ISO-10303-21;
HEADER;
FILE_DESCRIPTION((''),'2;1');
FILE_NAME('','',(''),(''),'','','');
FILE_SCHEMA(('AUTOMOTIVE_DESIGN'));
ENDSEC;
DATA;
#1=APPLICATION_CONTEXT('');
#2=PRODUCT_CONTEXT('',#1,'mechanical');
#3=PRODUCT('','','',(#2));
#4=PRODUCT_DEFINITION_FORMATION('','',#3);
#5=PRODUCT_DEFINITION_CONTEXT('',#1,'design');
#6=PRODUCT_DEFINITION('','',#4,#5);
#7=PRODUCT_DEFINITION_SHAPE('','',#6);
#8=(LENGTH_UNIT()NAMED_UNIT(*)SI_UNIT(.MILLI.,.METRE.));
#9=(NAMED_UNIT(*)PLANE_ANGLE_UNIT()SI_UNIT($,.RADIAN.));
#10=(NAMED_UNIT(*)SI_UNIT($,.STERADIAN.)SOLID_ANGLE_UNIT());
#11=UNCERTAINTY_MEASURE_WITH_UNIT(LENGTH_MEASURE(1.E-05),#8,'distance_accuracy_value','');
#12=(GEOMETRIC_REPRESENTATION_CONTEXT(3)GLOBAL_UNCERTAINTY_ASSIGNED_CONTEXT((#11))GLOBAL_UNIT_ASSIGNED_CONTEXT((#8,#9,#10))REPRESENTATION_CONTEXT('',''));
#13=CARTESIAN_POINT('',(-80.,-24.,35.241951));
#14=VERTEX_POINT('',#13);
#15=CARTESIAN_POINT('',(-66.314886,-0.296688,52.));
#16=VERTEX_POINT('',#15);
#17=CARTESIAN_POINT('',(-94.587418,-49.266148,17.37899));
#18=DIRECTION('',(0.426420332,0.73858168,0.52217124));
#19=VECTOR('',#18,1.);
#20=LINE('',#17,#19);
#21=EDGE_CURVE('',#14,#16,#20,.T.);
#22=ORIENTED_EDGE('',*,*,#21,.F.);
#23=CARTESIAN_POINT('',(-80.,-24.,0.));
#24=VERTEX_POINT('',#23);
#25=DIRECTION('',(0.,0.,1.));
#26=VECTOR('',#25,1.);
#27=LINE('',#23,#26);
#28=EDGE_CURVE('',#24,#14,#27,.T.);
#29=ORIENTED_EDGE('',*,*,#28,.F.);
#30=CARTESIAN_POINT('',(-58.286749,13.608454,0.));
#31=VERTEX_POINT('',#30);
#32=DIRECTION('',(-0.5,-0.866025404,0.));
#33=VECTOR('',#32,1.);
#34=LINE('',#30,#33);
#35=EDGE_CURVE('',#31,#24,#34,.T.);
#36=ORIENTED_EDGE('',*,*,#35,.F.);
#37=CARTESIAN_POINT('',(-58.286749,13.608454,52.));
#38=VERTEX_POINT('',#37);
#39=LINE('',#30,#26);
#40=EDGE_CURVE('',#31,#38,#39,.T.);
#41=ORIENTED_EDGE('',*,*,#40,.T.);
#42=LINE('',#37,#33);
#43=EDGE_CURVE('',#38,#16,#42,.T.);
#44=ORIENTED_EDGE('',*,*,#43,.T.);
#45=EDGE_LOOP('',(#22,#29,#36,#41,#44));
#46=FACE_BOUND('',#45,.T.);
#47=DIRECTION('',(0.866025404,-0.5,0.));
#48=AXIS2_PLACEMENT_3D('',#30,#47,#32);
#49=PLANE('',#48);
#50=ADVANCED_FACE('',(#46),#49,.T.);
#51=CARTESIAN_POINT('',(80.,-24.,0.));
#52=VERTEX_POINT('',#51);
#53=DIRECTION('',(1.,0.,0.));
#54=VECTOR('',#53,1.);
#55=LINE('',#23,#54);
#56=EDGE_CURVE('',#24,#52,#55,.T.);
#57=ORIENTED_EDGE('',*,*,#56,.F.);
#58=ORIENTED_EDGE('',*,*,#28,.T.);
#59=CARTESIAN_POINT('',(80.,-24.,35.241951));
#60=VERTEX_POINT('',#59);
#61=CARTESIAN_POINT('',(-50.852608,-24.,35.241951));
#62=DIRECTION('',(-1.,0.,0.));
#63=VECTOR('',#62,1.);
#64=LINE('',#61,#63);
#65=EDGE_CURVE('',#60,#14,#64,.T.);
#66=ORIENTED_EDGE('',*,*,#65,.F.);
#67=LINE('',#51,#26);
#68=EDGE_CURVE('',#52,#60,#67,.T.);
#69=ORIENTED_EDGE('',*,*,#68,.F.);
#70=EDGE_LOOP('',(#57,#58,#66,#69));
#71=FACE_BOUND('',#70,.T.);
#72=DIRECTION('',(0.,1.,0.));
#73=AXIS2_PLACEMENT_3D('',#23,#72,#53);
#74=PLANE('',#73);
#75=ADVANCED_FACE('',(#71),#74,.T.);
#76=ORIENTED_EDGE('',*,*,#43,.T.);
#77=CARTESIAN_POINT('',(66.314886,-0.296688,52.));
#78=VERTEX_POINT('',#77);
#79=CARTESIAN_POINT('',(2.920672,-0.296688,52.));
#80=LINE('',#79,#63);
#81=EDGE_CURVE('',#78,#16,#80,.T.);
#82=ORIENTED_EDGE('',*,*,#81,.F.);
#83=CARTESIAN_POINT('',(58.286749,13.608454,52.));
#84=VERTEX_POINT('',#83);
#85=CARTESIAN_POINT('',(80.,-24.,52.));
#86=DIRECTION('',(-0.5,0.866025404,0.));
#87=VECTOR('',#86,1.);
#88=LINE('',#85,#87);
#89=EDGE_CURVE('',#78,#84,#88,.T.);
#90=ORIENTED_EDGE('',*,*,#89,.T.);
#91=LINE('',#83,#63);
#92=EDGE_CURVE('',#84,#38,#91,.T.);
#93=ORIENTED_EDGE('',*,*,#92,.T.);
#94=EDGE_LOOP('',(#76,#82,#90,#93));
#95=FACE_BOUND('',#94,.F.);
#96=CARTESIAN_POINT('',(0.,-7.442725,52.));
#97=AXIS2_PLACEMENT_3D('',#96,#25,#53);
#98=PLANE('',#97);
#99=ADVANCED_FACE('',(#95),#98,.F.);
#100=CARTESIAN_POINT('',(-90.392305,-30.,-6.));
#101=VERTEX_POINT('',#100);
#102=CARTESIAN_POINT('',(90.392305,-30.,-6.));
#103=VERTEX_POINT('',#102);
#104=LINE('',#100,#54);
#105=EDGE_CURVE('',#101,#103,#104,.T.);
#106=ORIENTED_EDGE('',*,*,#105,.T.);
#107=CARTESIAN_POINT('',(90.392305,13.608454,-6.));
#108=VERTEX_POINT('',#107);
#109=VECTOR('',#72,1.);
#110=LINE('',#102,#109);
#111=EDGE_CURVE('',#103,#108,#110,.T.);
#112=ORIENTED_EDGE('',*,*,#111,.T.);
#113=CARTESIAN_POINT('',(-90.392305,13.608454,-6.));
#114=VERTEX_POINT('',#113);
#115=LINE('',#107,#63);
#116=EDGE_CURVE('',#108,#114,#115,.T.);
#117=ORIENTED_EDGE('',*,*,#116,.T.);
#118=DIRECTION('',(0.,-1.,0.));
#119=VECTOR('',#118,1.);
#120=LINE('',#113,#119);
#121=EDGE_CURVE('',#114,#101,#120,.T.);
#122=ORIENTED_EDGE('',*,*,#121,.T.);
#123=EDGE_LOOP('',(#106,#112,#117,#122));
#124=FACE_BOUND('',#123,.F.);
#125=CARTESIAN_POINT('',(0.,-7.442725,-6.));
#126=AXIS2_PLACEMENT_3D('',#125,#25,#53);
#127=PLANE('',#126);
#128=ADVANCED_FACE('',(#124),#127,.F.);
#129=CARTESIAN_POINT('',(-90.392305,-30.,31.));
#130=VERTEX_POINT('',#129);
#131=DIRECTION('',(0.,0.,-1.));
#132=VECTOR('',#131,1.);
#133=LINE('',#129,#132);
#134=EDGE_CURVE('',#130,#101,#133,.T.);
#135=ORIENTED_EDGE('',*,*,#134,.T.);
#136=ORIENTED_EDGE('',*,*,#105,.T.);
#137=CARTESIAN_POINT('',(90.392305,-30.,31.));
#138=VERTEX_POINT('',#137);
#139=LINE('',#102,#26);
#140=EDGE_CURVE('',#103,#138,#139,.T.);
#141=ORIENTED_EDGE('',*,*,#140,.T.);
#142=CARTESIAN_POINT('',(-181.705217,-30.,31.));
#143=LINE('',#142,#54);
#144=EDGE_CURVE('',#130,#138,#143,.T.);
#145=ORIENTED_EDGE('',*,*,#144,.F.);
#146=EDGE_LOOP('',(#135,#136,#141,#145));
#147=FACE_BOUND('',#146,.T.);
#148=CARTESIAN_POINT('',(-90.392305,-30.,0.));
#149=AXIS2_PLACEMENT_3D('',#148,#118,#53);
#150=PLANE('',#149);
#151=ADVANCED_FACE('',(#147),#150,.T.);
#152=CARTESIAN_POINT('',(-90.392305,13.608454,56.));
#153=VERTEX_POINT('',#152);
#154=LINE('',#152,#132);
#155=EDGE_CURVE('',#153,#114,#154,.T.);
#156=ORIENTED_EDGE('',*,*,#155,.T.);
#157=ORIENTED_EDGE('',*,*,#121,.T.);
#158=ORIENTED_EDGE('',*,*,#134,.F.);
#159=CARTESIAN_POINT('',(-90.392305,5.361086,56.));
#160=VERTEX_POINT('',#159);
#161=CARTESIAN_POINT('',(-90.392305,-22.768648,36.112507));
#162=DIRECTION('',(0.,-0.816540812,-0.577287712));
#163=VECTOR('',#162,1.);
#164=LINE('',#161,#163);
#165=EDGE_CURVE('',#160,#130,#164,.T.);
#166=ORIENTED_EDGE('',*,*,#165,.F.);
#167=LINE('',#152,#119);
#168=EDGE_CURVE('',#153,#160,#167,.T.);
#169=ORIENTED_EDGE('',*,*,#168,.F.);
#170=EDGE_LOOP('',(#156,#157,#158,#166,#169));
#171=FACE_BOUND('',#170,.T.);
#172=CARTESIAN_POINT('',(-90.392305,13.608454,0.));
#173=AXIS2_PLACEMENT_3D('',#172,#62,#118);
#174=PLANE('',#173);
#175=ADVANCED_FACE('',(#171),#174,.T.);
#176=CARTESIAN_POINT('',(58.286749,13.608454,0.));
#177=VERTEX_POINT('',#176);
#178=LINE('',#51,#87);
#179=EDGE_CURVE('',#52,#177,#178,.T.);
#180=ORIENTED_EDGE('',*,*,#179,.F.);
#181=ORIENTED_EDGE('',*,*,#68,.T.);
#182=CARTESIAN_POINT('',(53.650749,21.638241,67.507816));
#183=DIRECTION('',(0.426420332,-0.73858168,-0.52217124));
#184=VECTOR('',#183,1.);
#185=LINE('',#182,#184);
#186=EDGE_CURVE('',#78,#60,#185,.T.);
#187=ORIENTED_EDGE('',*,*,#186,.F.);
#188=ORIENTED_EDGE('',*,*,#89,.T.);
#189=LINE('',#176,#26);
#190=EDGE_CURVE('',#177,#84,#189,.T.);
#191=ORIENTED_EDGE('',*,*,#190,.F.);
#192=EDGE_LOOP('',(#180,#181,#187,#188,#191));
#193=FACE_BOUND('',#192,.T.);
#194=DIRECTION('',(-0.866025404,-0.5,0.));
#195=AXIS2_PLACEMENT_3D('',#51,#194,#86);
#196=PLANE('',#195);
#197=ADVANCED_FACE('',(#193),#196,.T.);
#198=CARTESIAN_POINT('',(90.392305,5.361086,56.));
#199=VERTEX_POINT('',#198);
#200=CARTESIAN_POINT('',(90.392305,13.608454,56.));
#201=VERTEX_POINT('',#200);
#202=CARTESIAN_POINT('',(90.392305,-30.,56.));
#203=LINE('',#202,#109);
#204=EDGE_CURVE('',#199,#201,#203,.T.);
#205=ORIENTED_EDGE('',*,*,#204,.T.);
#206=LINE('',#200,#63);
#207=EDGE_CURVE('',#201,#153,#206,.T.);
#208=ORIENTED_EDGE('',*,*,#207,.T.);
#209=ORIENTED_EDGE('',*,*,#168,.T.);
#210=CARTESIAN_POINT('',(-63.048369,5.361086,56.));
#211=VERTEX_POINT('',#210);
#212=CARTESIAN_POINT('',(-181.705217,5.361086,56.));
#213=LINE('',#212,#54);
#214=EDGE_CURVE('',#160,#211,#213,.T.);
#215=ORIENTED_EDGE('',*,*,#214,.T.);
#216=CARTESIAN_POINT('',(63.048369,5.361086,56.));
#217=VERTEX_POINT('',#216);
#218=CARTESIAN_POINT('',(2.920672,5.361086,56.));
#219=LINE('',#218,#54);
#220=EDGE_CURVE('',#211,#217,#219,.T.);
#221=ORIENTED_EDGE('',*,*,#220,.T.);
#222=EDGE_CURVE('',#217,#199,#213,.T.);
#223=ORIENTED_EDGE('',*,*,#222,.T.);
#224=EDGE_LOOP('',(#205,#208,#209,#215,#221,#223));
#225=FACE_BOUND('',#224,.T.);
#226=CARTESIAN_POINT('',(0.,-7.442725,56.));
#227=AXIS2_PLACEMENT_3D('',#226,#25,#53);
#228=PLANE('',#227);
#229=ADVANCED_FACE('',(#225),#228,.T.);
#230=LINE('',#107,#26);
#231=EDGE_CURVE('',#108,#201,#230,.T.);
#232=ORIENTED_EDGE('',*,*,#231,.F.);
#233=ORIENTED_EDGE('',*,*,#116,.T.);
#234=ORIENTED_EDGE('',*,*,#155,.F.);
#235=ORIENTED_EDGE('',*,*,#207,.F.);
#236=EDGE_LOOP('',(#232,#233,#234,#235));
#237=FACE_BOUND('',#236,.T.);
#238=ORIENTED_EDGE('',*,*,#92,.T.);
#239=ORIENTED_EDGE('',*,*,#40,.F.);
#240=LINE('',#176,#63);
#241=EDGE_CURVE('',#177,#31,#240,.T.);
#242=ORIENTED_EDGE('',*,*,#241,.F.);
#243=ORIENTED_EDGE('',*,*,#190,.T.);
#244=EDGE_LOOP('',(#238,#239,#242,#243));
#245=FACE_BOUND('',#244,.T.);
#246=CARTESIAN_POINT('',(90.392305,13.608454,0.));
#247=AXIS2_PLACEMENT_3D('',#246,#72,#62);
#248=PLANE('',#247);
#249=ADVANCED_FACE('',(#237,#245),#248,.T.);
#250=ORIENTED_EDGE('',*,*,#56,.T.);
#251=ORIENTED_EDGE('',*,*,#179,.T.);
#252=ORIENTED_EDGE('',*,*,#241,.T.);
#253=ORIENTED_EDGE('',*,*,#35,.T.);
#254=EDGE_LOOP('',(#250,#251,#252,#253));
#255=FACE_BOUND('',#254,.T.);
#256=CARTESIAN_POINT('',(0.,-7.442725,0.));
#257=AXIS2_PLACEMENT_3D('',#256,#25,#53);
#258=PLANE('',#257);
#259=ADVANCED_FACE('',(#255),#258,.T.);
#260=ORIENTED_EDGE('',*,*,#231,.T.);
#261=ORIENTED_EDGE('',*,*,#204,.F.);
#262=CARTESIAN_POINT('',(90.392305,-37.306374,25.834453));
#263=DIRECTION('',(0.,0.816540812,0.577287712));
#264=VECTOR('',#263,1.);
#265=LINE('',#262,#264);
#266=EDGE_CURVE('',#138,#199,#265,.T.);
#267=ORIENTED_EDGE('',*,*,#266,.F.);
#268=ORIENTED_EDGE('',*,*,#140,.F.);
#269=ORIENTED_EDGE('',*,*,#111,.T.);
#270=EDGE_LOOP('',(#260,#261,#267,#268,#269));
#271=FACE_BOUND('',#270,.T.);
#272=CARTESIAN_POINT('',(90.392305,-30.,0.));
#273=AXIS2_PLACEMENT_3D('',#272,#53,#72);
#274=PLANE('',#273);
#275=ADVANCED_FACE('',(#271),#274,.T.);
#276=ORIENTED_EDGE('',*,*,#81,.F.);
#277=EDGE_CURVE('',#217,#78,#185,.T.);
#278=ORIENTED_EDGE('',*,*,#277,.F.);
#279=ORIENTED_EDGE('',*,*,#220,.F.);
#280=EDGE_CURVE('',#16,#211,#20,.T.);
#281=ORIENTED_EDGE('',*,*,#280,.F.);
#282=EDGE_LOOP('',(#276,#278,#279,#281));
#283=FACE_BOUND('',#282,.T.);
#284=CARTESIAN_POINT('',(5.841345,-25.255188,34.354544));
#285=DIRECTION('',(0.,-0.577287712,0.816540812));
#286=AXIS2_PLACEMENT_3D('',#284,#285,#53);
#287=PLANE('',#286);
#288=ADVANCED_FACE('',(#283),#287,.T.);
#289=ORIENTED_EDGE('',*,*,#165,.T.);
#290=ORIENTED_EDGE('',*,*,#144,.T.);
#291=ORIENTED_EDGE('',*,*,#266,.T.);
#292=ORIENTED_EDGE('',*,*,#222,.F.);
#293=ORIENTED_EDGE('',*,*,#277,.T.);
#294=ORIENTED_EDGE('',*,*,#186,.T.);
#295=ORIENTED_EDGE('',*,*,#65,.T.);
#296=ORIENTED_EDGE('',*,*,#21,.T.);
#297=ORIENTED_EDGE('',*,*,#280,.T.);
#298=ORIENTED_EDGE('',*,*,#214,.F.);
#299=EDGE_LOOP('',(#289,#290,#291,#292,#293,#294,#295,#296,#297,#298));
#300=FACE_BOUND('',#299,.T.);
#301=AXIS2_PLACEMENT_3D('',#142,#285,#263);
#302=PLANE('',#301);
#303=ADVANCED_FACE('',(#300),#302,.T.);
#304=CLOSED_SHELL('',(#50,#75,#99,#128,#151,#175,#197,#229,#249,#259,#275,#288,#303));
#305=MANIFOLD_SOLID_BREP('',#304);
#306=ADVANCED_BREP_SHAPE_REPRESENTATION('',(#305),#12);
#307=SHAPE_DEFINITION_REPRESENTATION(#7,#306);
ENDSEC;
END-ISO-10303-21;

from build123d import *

# Parameters (mm, degrees)
F1_DEPTH    = 56
F2_T1_DEPTH = 363.4104337306
F3_DEPTH    = 56
F6_DEPTH    = 6
F5_W        = 259.5228254795
F5_H        = 121.416632086
F7_DEPTH    = 25
F8_DEPTH    = 52


# Not quite as in the source:
# - a fillet or chamfer that OpenCascade refuses, or shapes differently, is made with other operations: its cross-section is extruded or revolved along the edge and cut away or added


with BuildPart() as f1:
    # F0 (on Top) → F1 (new body)
    with BuildSketch(Plane.XY):
        Polygon((80, -24), (-80, -24), (-58.2867488807, 13.6084541361), (-65.214952111, 13.6084541361), (-73.0717967697, 0), (-90.3923048454, -30), (90.3923048454, -30), (73.0717967697, 0), (65.214952111, 13.6084541361), (58.2867488807, 13.6084541361), align=None)
        Polygon((-90.3923048454, -30), (-73.0717967697, 0), (-90.3923048454, 0), align=None)
        Polygon((90.3923048454, 0), (73.0717967697, 0), (90.3923048454, -30), align=None)
        Polygon((-73.0717967697, 0), (-65.214952111, 13.6084541361), (-90.3923048454, 13.6084541361), (-90.3923048454, 0), align=None)
        Polygon((90.3923048454, 13.6084541361), (65.214952111, 13.6084541361), (73.0717967697, 0), (90.3923048454, 0), align=None)
    extrude(amount=F1_DEPTH)

    # F2: chamfer of 25 x 35.3610857633 on 1 edges, made by hand

    # F2_s2 → F2_t1 (cut)
    with BuildSketch(Plane.YZ.offset(-181.7052168653)):
        Polygon((-30, 31), (5.3610857633, 56), (-30, 56), align=None)
    extrude(amount=F2_T1_DEPTH, mode=Mode.SUBTRACT)

    # F0 (on Top) → F3 (join)
    with BuildSketch(Plane.XY):
        Polygon((-58.2867488807, 13.6084541361), (-80, -24), (80, -24), (58.2867488807, 13.6084541361), align=None)
    extrude(amount=F3_DEPTH)

    # F0 (on Top) → F6 (join)
    with BuildSketch(Plane.XY):
        Polygon((-58.2867488807, 13.6084541361), (-80, -24), (80, -24), (58.2867488807, 13.6084541361), align=None)
        Polygon((80, -24), (-80, -24), (-58.2867488807, 13.6084541361), (-65.214952111, 13.6084541361), (-73.0717967697, 0), (-90.3923048454, -30), (90.3923048454, -30), (73.0717967697, 0), (65.214952111, 13.6084541361), (58.2867488807, 13.6084541361), align=None)
        Polygon((-90.3923048454, -30), (-73.0717967697, 0), (-90.3923048454, 0), align=None)
        Polygon((-73.0717967697, 0), (-65.214952111, 13.6084541361), (-90.3923048454, 13.6084541361), (-90.3923048454, 0), align=None)
        Polygon((90.3923048454, 13.6084541361), (65.214952111, 13.6084541361), (73.0717967697, 0), (90.3923048454, 0), align=None)
        Polygon((90.3923048454, 0), (73.0717967697, 0), (90.3923048454, -30), align=None)
    extrude(amount=-F6_DEPTH)

    # F5 (on offset) → F7 (cut)
    with BuildSketch(Plane(origin=(0, -24.6105813664, 34.8102751353), x_dir=(1, 0, 0), z_dir=(0, -0.5772877121, 0.8165408119))):
        with Locations((5.841344595, -0.7894355804)):
            Rectangle(F5_W, F5_H)
    extrude(amount=F7_DEPTH, mode=Mode.SUBTRACT)

    # F0 (on Top) → F8 (cut)
    with BuildSketch(Plane.XY):
        Polygon((-58.2867488807, 13.6084541361), (-80, -24), (80, -24), (58.2867488807, 13.6084541361), align=None)
    extrude(amount=F8_DEPTH, mode=Mode.SUBTRACT)


solid = f1.part
